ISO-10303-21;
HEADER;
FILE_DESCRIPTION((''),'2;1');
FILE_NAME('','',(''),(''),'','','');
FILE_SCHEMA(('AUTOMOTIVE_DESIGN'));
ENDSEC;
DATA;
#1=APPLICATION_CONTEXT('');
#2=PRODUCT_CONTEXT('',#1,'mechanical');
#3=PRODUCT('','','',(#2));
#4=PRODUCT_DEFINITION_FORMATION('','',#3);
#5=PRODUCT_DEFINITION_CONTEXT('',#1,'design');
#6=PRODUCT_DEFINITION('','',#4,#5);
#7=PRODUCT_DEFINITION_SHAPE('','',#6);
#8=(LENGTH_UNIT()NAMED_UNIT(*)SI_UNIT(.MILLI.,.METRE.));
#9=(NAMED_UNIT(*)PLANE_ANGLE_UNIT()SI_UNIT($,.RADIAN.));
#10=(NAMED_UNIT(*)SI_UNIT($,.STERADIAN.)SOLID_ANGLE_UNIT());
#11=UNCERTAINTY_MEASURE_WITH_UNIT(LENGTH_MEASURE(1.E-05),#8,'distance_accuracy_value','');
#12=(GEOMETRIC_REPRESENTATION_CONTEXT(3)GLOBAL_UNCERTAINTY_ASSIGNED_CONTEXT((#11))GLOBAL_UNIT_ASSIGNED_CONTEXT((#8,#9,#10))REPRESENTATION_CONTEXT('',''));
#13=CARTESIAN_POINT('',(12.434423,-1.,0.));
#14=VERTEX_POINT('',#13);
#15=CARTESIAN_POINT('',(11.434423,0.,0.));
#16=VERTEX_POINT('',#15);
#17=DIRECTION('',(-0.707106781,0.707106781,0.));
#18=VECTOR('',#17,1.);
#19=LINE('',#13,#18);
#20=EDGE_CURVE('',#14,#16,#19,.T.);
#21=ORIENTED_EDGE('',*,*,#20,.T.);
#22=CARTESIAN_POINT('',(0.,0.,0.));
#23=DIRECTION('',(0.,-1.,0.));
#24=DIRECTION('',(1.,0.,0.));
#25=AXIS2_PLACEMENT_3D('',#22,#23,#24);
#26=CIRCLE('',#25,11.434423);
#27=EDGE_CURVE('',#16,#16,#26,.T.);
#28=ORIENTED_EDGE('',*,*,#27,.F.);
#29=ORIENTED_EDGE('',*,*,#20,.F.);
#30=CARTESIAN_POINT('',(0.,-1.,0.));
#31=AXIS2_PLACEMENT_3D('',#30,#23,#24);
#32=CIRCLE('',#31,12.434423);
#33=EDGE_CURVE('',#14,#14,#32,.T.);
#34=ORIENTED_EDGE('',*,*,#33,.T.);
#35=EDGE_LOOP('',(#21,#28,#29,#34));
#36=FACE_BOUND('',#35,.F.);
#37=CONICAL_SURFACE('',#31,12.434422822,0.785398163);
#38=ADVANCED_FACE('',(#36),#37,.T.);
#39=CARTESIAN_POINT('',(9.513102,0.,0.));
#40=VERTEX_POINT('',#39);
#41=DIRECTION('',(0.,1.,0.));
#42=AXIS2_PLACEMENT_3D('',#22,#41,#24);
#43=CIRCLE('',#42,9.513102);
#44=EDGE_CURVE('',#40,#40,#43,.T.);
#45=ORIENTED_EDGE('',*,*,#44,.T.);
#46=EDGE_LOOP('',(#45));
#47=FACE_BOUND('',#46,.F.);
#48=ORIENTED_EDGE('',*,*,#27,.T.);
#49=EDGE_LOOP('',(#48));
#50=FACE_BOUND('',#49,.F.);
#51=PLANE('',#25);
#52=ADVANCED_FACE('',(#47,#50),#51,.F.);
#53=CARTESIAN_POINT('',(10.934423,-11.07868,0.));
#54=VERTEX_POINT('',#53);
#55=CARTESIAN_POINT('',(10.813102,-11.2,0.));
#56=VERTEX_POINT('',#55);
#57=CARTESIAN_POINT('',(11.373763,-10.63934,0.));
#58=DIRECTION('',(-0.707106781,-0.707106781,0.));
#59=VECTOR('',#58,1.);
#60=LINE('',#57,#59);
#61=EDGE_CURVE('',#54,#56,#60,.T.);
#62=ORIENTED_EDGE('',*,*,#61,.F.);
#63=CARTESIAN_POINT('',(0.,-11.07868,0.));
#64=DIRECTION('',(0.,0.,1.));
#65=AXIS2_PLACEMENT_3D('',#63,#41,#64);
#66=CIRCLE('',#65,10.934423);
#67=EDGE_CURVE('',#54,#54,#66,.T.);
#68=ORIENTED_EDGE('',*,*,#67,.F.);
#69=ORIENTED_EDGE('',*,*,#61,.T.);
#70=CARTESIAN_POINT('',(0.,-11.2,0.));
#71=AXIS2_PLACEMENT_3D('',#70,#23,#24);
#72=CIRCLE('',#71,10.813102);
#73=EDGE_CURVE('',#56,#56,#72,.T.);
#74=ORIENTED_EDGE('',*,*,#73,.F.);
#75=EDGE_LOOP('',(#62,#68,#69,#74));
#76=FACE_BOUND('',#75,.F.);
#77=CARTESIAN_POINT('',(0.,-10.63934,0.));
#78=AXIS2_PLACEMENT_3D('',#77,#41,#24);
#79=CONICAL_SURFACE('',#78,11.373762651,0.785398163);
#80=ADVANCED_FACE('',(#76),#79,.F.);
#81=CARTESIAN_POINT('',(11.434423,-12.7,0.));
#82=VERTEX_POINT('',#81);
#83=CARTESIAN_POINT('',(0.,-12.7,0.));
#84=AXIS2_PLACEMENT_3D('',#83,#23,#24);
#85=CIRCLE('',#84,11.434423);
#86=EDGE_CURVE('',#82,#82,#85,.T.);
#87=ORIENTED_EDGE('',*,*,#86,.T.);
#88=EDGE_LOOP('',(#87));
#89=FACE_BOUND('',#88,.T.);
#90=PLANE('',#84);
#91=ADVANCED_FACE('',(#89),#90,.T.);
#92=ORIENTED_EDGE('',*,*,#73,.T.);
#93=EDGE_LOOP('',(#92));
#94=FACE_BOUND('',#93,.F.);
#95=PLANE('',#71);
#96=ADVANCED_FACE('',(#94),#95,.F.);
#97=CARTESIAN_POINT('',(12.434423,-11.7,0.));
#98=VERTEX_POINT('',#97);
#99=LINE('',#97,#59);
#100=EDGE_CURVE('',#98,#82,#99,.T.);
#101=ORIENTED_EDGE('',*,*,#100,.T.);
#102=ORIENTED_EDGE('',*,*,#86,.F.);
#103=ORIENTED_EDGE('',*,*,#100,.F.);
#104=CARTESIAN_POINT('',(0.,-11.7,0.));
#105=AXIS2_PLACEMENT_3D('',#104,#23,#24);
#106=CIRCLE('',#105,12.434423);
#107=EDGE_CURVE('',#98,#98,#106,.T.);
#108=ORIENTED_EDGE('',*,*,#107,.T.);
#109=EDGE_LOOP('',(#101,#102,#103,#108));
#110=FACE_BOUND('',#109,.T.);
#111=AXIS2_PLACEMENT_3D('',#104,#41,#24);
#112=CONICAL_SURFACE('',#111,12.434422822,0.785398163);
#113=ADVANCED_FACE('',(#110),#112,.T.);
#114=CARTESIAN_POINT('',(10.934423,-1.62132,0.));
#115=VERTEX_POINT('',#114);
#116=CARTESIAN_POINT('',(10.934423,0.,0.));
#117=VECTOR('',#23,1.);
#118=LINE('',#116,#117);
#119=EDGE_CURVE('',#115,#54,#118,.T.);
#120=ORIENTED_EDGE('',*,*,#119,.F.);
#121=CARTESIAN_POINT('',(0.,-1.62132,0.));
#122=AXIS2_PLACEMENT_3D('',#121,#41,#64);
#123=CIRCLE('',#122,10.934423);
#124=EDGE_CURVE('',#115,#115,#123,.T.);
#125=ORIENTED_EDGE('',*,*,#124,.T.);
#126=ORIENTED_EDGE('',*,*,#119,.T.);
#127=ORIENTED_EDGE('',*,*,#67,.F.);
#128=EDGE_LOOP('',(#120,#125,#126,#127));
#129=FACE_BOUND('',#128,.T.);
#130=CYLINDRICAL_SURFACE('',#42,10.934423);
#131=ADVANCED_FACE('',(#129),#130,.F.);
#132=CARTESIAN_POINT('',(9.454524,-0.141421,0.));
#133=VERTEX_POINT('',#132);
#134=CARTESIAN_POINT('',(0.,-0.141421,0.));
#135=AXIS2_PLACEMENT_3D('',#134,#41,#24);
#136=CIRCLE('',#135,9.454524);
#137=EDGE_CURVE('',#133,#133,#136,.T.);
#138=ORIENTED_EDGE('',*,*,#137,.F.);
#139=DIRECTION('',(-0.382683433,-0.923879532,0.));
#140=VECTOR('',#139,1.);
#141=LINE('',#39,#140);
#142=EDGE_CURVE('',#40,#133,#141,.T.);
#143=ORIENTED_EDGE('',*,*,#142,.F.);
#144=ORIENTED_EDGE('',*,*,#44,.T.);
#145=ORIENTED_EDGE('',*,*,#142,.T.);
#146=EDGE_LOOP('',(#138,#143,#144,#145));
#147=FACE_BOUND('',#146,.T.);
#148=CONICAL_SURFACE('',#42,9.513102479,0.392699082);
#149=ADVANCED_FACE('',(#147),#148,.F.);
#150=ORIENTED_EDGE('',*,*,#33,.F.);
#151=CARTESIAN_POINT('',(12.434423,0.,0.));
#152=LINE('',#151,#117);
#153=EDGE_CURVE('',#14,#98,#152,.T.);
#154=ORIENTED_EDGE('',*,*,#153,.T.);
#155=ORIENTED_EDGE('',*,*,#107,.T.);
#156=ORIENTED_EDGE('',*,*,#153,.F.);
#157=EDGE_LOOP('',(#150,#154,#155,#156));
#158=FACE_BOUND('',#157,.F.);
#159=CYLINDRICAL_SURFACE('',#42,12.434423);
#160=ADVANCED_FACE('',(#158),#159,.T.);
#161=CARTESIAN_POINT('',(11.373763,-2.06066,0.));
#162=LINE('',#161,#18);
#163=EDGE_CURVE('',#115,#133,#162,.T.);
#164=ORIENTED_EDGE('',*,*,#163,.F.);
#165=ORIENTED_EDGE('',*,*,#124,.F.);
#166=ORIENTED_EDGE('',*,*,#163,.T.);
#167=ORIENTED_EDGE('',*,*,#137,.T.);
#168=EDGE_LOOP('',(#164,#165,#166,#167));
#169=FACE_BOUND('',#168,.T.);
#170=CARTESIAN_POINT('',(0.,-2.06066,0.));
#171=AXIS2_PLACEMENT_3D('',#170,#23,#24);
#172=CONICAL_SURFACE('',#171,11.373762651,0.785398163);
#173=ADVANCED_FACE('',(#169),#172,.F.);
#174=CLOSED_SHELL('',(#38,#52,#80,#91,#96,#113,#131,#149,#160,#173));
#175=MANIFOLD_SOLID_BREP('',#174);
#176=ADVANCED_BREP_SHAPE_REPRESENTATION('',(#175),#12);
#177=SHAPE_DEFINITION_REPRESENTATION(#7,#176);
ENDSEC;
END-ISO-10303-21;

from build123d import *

# Parameters (mm, degrees)
F0_R     = 12.4344228223
F1_DEPTH = 12.7
F2_SIZE  = 1
F3_T     = -1.5


# Not quite as in the source:
# - a fillet or chamfer that OpenCascade refuses, or shapes differently, is made with other operations: its cross-section is extruded or revolved along the edge and cut away or added
# - the program builds the solid bodies; features that only make, move or delete a surface that nothing else refers to are left out


with BuildPart() as f1:
    # F0 (on Front) → F1 (new body)
    with BuildSketch(Plane.XZ):
        Circle(F0_R)
    extrude(amount=F1_DEPTH)

    # F2
    f2_edges = [f1.edges().sort_by_distance(p)[0] for p in [
        (-12.434423, 0, 0),
        (12.434423, -6.35, 0),
        (-12.434423, -12.7, 0),
    ]]
    chamfer(f2_edges, length=F2_SIZE)

    # F3
    f3_openings = [f1.faces().sort_by_distance(p)[0] for p in [
        (0, 0, 0),
    ]]
    offset(amount=F3_T, openings=f3_openings)

    # F5: chamfer of 0.2 on 2 edges, made by hand

    # F5_s1 → F5_t2 (revolve, cut)
    with BuildSketch(Plane.XY):
        Polygon((9.5131024788, 0), (9.454523835, -0.1414213562), (9.3131024788, 0), align=None)
    revolve(axis=Axis((0, 0, 0), (0, 1, 0)), mode=Mode.SUBTRACT)


solid = f1.part
